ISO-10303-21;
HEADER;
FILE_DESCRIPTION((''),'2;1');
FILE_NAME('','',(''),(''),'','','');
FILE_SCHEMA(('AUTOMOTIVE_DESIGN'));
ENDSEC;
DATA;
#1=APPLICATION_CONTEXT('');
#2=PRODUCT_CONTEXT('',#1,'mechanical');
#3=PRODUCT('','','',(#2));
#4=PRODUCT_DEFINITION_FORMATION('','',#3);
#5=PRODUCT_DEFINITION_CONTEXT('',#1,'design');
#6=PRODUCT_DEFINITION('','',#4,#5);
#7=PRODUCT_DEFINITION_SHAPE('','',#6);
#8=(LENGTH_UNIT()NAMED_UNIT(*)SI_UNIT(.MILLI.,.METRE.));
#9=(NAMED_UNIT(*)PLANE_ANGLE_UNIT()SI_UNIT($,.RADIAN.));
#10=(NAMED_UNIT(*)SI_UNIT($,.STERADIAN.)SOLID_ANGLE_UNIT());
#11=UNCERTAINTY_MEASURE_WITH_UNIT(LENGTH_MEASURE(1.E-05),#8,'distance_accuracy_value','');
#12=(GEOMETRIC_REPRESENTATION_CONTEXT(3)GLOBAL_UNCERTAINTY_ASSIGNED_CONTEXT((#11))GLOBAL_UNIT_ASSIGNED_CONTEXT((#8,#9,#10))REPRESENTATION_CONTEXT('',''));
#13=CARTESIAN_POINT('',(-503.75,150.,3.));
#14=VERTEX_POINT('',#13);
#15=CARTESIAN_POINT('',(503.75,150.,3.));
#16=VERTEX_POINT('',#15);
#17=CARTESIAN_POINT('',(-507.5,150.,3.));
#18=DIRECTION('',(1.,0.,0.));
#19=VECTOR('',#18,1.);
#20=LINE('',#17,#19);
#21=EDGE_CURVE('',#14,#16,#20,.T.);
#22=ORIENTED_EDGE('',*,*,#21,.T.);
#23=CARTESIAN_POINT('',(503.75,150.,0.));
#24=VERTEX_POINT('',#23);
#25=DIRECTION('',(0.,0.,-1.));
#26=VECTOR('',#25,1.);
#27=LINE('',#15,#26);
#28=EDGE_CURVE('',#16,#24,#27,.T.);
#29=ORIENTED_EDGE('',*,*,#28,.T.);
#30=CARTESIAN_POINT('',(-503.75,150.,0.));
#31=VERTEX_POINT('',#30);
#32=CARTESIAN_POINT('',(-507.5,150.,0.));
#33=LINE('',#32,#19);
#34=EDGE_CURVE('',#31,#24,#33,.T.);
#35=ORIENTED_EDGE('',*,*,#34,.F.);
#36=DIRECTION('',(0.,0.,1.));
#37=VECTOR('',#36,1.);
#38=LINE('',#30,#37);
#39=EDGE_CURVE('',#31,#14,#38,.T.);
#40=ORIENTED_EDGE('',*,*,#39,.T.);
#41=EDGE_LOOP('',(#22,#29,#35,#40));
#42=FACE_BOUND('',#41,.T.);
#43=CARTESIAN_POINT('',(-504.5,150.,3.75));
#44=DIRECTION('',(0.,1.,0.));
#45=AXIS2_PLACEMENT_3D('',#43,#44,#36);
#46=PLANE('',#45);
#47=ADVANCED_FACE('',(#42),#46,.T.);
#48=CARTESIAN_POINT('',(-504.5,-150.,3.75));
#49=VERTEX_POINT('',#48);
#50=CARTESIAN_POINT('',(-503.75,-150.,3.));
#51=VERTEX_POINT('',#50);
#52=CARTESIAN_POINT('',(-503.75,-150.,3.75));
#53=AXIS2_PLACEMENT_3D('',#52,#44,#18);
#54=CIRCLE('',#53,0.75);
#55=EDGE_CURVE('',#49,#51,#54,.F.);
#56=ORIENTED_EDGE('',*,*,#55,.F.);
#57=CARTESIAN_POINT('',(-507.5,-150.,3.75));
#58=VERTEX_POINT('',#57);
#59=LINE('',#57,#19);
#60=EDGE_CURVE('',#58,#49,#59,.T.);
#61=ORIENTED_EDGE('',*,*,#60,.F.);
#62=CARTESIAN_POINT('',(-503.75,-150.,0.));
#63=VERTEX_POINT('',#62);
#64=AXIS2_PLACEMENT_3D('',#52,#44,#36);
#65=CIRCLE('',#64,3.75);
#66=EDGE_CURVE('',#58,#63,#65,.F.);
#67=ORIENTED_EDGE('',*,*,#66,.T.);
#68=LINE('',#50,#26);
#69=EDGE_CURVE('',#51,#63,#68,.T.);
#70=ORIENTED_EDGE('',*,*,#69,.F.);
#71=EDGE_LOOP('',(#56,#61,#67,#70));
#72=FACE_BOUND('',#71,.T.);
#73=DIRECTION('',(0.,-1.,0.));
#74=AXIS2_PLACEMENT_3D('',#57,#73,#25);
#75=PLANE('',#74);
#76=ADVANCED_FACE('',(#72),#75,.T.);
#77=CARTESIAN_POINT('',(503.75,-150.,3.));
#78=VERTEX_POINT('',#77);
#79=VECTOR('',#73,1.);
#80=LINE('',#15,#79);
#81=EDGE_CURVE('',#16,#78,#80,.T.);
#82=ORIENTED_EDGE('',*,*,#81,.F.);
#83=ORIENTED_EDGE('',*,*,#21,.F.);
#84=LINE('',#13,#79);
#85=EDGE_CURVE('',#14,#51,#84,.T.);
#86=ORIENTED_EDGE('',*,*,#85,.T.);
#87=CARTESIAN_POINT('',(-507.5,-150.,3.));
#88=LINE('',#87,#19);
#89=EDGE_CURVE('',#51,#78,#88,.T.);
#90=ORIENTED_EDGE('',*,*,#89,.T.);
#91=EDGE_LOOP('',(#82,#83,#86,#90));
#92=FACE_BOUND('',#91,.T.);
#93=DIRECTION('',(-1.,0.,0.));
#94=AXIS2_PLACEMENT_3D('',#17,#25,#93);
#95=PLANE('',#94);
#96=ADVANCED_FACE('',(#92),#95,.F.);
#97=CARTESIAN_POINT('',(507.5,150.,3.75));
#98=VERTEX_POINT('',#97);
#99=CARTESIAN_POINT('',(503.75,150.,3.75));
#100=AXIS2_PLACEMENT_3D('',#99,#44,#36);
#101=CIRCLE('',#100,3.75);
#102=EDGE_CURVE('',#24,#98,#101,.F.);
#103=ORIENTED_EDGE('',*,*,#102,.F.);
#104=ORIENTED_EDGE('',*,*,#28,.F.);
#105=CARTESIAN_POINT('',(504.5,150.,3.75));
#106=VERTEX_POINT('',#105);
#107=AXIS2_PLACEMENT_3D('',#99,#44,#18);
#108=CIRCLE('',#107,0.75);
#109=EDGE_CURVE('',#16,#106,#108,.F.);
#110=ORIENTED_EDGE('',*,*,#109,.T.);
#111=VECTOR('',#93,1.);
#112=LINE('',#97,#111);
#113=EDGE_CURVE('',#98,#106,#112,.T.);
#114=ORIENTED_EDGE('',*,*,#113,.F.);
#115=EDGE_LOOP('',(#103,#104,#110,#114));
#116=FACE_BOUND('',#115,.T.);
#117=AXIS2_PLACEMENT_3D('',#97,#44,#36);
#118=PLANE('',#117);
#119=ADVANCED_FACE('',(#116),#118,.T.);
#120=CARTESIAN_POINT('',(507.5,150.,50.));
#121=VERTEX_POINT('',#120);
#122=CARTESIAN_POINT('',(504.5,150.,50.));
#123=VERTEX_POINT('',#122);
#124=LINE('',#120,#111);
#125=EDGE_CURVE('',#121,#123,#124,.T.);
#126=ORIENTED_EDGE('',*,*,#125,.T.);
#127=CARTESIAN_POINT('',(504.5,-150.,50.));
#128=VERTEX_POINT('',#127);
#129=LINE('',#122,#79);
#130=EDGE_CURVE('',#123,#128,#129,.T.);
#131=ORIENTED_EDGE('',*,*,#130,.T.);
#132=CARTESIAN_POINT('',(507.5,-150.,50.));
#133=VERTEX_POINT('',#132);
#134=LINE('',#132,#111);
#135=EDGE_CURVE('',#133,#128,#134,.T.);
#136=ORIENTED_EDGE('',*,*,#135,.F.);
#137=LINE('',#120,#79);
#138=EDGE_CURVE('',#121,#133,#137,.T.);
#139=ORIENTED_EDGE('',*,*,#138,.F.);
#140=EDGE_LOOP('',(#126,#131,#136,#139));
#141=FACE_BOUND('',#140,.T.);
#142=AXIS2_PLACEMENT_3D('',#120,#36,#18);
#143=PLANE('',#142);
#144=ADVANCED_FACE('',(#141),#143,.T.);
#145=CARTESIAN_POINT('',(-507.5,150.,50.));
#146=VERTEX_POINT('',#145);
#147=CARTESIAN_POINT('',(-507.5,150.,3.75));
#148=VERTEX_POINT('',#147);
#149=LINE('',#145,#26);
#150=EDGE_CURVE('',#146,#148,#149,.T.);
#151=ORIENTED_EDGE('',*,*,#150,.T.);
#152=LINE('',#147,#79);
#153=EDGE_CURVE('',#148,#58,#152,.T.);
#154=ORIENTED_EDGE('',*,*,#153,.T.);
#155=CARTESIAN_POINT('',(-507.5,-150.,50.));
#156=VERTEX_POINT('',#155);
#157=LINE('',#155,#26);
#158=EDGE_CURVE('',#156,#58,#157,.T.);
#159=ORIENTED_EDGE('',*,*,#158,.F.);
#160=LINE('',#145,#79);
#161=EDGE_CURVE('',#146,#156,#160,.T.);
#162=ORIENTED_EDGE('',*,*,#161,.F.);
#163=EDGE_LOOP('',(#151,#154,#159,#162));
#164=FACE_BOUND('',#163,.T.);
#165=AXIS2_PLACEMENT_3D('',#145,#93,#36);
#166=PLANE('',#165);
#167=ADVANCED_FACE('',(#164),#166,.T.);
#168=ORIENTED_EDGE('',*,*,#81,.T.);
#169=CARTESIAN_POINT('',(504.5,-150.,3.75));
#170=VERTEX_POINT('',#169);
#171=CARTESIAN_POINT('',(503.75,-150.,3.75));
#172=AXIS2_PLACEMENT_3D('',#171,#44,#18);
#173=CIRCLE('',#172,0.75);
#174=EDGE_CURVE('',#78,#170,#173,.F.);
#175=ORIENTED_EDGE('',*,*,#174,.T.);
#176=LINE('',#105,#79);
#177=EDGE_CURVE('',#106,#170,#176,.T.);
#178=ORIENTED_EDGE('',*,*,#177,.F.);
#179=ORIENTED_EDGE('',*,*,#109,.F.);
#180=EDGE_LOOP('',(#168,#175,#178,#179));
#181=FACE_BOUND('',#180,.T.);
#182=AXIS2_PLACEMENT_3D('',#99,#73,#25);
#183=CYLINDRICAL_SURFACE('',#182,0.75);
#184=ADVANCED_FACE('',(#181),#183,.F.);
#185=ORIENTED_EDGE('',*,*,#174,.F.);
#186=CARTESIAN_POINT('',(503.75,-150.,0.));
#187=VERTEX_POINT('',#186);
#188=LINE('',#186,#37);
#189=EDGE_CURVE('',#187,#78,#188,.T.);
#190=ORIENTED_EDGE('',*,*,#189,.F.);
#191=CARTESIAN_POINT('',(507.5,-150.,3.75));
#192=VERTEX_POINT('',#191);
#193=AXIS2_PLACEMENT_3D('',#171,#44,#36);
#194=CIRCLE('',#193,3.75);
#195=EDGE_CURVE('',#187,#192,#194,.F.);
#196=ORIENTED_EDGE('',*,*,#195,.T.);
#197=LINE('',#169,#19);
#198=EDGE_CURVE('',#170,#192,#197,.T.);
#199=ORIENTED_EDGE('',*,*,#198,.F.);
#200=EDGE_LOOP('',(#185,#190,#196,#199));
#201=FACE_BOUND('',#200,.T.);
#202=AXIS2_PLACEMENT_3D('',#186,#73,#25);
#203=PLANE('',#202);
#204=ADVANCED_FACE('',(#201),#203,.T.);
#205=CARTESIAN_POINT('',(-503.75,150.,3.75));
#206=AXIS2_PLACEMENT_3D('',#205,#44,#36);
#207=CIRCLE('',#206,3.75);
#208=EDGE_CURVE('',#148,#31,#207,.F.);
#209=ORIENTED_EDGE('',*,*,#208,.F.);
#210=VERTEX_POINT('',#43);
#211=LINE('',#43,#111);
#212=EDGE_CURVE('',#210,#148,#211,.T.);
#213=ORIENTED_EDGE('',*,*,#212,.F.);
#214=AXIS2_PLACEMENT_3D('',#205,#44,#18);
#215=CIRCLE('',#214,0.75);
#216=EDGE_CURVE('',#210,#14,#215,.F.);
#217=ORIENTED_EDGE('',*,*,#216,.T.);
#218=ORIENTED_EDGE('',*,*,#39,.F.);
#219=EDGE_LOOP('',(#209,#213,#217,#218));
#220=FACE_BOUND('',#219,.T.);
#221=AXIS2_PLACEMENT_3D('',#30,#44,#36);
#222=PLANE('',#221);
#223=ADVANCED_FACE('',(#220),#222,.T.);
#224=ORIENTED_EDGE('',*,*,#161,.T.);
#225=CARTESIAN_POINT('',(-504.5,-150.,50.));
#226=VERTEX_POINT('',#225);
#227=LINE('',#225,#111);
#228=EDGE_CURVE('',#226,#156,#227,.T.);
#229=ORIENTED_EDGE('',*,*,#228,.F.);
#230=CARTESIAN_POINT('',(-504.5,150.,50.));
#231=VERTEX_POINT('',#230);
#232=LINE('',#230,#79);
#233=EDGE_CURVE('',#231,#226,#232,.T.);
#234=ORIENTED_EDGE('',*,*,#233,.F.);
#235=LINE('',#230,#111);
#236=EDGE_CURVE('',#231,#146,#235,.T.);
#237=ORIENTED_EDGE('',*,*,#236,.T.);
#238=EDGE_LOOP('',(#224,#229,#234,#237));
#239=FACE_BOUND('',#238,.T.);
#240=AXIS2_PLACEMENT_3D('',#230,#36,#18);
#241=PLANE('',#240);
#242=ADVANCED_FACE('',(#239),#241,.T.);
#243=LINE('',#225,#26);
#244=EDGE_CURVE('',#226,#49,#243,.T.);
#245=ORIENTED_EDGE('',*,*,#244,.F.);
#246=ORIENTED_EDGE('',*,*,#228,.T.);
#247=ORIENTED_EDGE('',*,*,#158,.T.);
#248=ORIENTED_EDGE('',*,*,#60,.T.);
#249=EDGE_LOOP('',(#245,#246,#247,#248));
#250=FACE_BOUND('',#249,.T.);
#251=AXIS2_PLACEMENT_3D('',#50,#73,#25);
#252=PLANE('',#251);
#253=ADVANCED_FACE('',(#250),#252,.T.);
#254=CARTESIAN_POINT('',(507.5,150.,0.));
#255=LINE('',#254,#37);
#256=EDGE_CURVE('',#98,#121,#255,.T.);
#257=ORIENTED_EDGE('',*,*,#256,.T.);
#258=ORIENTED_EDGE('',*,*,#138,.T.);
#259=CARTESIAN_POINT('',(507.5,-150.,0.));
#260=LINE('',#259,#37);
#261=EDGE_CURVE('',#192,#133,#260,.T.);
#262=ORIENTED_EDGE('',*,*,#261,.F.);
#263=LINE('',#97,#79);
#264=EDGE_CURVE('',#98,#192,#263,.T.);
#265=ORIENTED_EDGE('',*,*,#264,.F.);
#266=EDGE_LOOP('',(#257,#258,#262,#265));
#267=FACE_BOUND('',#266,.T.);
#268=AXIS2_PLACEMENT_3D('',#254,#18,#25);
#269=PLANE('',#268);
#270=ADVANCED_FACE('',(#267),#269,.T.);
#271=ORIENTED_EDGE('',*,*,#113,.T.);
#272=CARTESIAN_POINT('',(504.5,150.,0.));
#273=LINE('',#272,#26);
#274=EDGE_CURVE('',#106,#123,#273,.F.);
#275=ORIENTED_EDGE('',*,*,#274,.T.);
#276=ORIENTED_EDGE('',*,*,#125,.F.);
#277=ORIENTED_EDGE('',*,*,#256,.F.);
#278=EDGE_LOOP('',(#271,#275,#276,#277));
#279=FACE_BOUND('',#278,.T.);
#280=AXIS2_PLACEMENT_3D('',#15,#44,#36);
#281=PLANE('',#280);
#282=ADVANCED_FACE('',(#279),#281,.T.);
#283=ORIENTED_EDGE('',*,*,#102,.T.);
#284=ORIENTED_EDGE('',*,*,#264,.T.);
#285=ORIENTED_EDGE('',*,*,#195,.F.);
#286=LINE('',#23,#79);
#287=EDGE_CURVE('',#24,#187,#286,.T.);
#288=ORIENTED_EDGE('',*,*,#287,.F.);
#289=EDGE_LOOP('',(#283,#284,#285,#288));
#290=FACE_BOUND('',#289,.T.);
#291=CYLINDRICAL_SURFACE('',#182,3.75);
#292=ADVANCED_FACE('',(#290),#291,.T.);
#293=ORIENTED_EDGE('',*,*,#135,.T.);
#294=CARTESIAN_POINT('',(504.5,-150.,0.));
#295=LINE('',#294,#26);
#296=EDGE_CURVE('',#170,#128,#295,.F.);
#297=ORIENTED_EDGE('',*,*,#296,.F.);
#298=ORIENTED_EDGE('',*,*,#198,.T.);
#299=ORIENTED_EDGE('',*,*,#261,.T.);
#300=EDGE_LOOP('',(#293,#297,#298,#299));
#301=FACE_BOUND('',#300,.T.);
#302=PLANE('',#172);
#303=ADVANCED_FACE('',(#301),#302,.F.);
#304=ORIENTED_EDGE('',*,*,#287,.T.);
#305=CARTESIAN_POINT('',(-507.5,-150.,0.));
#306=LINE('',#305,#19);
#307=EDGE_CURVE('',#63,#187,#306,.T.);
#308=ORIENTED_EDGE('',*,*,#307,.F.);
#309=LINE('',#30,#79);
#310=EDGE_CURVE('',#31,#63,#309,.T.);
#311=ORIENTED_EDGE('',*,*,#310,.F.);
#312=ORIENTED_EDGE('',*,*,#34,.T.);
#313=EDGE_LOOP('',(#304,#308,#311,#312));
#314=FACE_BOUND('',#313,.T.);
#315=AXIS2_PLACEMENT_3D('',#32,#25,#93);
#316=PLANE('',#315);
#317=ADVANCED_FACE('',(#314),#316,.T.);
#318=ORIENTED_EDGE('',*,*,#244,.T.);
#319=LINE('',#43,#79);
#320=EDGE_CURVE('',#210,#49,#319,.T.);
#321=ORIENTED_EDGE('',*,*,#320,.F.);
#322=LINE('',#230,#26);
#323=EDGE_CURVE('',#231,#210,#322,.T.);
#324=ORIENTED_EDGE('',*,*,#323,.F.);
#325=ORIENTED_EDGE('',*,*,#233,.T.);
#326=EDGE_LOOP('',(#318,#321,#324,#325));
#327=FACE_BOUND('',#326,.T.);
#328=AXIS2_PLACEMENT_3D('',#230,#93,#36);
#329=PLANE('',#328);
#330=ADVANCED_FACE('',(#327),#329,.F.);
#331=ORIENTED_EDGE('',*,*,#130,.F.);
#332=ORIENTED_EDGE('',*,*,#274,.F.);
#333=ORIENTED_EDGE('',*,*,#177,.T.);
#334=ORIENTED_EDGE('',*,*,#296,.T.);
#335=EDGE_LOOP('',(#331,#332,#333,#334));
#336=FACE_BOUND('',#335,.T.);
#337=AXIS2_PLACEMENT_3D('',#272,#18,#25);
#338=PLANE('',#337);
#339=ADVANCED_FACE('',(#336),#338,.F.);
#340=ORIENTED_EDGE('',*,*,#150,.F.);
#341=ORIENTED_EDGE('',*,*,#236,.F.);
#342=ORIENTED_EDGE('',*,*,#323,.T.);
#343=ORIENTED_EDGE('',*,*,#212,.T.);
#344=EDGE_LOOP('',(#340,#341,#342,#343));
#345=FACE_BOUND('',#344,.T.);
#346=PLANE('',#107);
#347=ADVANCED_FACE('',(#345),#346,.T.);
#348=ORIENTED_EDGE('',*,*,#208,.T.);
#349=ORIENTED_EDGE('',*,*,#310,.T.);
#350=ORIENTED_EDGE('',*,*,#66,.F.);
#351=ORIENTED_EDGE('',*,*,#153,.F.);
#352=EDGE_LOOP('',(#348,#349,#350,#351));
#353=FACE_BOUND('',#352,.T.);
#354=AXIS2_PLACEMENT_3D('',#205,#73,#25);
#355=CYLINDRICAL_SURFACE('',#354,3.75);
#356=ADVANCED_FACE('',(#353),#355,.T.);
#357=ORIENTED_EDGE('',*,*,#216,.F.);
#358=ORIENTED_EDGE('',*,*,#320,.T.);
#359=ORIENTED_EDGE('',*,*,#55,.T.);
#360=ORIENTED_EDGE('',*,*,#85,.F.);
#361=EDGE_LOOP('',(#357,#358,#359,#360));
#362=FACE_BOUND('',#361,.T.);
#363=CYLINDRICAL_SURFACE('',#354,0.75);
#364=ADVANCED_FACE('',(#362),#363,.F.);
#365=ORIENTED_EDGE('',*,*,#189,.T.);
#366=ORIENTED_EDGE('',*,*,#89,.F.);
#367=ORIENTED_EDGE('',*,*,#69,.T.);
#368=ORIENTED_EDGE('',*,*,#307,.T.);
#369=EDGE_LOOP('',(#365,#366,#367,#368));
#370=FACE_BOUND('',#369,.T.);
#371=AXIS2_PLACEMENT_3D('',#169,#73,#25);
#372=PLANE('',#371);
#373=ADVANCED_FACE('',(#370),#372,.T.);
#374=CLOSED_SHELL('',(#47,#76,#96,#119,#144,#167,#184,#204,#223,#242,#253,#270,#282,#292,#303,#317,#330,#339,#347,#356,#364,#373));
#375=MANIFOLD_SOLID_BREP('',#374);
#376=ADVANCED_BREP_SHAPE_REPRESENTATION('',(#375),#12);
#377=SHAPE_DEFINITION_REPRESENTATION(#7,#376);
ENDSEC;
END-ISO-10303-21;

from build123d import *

# Parameters (mm, degrees)
SM_BASE_FLANGE_1_DEPTH = 150


# Sheet-metal steps are written as plain solids
with BuildPart() as part:
    # Sketch 1 → Базовая кромка1 (new, symmetric)
    with BuildSketch(Plane(origin=(0, 0, 0), x_dir=(1, 0, 0), z_dir=(0, 1, 0))):
        with BuildLine():
            Line((-507.5, -50), (-507.5, -3.75))
            ThreePointArc((-507.5, -3.75), (-506.401650429, -1.098349571), (-503.75, 0))
            Line((-503.75, 0), (503.75, 0))
            ThreePointArc((503.75, 0), (506.401650429, -1.098349571), (507.5, -3.75))
            Line((507.5, -3.75), (507.5, -50))
            Line((507.5, -50), (504.5, -50))
            Line((504.5, -50), (504.5, -3.75))
            ThreePointArc((504.5, -3.75), (504.280330086, -3.219669914), (503.75, -3))
            Line((503.75, -3), (-503.75, -3))
            ThreePointArc((-503.75, -3), (-504.280330086, -3.219669914), (-504.5, -3.75))
            Line((-504.5, -3.75), (-504.5, -50))
            Line((-504.5, -50), (-507.5, -50))
        make_face()
    extrude(amount=SM_BASE_FLANGE_1_DEPTH, both=True)


solid = part.part
